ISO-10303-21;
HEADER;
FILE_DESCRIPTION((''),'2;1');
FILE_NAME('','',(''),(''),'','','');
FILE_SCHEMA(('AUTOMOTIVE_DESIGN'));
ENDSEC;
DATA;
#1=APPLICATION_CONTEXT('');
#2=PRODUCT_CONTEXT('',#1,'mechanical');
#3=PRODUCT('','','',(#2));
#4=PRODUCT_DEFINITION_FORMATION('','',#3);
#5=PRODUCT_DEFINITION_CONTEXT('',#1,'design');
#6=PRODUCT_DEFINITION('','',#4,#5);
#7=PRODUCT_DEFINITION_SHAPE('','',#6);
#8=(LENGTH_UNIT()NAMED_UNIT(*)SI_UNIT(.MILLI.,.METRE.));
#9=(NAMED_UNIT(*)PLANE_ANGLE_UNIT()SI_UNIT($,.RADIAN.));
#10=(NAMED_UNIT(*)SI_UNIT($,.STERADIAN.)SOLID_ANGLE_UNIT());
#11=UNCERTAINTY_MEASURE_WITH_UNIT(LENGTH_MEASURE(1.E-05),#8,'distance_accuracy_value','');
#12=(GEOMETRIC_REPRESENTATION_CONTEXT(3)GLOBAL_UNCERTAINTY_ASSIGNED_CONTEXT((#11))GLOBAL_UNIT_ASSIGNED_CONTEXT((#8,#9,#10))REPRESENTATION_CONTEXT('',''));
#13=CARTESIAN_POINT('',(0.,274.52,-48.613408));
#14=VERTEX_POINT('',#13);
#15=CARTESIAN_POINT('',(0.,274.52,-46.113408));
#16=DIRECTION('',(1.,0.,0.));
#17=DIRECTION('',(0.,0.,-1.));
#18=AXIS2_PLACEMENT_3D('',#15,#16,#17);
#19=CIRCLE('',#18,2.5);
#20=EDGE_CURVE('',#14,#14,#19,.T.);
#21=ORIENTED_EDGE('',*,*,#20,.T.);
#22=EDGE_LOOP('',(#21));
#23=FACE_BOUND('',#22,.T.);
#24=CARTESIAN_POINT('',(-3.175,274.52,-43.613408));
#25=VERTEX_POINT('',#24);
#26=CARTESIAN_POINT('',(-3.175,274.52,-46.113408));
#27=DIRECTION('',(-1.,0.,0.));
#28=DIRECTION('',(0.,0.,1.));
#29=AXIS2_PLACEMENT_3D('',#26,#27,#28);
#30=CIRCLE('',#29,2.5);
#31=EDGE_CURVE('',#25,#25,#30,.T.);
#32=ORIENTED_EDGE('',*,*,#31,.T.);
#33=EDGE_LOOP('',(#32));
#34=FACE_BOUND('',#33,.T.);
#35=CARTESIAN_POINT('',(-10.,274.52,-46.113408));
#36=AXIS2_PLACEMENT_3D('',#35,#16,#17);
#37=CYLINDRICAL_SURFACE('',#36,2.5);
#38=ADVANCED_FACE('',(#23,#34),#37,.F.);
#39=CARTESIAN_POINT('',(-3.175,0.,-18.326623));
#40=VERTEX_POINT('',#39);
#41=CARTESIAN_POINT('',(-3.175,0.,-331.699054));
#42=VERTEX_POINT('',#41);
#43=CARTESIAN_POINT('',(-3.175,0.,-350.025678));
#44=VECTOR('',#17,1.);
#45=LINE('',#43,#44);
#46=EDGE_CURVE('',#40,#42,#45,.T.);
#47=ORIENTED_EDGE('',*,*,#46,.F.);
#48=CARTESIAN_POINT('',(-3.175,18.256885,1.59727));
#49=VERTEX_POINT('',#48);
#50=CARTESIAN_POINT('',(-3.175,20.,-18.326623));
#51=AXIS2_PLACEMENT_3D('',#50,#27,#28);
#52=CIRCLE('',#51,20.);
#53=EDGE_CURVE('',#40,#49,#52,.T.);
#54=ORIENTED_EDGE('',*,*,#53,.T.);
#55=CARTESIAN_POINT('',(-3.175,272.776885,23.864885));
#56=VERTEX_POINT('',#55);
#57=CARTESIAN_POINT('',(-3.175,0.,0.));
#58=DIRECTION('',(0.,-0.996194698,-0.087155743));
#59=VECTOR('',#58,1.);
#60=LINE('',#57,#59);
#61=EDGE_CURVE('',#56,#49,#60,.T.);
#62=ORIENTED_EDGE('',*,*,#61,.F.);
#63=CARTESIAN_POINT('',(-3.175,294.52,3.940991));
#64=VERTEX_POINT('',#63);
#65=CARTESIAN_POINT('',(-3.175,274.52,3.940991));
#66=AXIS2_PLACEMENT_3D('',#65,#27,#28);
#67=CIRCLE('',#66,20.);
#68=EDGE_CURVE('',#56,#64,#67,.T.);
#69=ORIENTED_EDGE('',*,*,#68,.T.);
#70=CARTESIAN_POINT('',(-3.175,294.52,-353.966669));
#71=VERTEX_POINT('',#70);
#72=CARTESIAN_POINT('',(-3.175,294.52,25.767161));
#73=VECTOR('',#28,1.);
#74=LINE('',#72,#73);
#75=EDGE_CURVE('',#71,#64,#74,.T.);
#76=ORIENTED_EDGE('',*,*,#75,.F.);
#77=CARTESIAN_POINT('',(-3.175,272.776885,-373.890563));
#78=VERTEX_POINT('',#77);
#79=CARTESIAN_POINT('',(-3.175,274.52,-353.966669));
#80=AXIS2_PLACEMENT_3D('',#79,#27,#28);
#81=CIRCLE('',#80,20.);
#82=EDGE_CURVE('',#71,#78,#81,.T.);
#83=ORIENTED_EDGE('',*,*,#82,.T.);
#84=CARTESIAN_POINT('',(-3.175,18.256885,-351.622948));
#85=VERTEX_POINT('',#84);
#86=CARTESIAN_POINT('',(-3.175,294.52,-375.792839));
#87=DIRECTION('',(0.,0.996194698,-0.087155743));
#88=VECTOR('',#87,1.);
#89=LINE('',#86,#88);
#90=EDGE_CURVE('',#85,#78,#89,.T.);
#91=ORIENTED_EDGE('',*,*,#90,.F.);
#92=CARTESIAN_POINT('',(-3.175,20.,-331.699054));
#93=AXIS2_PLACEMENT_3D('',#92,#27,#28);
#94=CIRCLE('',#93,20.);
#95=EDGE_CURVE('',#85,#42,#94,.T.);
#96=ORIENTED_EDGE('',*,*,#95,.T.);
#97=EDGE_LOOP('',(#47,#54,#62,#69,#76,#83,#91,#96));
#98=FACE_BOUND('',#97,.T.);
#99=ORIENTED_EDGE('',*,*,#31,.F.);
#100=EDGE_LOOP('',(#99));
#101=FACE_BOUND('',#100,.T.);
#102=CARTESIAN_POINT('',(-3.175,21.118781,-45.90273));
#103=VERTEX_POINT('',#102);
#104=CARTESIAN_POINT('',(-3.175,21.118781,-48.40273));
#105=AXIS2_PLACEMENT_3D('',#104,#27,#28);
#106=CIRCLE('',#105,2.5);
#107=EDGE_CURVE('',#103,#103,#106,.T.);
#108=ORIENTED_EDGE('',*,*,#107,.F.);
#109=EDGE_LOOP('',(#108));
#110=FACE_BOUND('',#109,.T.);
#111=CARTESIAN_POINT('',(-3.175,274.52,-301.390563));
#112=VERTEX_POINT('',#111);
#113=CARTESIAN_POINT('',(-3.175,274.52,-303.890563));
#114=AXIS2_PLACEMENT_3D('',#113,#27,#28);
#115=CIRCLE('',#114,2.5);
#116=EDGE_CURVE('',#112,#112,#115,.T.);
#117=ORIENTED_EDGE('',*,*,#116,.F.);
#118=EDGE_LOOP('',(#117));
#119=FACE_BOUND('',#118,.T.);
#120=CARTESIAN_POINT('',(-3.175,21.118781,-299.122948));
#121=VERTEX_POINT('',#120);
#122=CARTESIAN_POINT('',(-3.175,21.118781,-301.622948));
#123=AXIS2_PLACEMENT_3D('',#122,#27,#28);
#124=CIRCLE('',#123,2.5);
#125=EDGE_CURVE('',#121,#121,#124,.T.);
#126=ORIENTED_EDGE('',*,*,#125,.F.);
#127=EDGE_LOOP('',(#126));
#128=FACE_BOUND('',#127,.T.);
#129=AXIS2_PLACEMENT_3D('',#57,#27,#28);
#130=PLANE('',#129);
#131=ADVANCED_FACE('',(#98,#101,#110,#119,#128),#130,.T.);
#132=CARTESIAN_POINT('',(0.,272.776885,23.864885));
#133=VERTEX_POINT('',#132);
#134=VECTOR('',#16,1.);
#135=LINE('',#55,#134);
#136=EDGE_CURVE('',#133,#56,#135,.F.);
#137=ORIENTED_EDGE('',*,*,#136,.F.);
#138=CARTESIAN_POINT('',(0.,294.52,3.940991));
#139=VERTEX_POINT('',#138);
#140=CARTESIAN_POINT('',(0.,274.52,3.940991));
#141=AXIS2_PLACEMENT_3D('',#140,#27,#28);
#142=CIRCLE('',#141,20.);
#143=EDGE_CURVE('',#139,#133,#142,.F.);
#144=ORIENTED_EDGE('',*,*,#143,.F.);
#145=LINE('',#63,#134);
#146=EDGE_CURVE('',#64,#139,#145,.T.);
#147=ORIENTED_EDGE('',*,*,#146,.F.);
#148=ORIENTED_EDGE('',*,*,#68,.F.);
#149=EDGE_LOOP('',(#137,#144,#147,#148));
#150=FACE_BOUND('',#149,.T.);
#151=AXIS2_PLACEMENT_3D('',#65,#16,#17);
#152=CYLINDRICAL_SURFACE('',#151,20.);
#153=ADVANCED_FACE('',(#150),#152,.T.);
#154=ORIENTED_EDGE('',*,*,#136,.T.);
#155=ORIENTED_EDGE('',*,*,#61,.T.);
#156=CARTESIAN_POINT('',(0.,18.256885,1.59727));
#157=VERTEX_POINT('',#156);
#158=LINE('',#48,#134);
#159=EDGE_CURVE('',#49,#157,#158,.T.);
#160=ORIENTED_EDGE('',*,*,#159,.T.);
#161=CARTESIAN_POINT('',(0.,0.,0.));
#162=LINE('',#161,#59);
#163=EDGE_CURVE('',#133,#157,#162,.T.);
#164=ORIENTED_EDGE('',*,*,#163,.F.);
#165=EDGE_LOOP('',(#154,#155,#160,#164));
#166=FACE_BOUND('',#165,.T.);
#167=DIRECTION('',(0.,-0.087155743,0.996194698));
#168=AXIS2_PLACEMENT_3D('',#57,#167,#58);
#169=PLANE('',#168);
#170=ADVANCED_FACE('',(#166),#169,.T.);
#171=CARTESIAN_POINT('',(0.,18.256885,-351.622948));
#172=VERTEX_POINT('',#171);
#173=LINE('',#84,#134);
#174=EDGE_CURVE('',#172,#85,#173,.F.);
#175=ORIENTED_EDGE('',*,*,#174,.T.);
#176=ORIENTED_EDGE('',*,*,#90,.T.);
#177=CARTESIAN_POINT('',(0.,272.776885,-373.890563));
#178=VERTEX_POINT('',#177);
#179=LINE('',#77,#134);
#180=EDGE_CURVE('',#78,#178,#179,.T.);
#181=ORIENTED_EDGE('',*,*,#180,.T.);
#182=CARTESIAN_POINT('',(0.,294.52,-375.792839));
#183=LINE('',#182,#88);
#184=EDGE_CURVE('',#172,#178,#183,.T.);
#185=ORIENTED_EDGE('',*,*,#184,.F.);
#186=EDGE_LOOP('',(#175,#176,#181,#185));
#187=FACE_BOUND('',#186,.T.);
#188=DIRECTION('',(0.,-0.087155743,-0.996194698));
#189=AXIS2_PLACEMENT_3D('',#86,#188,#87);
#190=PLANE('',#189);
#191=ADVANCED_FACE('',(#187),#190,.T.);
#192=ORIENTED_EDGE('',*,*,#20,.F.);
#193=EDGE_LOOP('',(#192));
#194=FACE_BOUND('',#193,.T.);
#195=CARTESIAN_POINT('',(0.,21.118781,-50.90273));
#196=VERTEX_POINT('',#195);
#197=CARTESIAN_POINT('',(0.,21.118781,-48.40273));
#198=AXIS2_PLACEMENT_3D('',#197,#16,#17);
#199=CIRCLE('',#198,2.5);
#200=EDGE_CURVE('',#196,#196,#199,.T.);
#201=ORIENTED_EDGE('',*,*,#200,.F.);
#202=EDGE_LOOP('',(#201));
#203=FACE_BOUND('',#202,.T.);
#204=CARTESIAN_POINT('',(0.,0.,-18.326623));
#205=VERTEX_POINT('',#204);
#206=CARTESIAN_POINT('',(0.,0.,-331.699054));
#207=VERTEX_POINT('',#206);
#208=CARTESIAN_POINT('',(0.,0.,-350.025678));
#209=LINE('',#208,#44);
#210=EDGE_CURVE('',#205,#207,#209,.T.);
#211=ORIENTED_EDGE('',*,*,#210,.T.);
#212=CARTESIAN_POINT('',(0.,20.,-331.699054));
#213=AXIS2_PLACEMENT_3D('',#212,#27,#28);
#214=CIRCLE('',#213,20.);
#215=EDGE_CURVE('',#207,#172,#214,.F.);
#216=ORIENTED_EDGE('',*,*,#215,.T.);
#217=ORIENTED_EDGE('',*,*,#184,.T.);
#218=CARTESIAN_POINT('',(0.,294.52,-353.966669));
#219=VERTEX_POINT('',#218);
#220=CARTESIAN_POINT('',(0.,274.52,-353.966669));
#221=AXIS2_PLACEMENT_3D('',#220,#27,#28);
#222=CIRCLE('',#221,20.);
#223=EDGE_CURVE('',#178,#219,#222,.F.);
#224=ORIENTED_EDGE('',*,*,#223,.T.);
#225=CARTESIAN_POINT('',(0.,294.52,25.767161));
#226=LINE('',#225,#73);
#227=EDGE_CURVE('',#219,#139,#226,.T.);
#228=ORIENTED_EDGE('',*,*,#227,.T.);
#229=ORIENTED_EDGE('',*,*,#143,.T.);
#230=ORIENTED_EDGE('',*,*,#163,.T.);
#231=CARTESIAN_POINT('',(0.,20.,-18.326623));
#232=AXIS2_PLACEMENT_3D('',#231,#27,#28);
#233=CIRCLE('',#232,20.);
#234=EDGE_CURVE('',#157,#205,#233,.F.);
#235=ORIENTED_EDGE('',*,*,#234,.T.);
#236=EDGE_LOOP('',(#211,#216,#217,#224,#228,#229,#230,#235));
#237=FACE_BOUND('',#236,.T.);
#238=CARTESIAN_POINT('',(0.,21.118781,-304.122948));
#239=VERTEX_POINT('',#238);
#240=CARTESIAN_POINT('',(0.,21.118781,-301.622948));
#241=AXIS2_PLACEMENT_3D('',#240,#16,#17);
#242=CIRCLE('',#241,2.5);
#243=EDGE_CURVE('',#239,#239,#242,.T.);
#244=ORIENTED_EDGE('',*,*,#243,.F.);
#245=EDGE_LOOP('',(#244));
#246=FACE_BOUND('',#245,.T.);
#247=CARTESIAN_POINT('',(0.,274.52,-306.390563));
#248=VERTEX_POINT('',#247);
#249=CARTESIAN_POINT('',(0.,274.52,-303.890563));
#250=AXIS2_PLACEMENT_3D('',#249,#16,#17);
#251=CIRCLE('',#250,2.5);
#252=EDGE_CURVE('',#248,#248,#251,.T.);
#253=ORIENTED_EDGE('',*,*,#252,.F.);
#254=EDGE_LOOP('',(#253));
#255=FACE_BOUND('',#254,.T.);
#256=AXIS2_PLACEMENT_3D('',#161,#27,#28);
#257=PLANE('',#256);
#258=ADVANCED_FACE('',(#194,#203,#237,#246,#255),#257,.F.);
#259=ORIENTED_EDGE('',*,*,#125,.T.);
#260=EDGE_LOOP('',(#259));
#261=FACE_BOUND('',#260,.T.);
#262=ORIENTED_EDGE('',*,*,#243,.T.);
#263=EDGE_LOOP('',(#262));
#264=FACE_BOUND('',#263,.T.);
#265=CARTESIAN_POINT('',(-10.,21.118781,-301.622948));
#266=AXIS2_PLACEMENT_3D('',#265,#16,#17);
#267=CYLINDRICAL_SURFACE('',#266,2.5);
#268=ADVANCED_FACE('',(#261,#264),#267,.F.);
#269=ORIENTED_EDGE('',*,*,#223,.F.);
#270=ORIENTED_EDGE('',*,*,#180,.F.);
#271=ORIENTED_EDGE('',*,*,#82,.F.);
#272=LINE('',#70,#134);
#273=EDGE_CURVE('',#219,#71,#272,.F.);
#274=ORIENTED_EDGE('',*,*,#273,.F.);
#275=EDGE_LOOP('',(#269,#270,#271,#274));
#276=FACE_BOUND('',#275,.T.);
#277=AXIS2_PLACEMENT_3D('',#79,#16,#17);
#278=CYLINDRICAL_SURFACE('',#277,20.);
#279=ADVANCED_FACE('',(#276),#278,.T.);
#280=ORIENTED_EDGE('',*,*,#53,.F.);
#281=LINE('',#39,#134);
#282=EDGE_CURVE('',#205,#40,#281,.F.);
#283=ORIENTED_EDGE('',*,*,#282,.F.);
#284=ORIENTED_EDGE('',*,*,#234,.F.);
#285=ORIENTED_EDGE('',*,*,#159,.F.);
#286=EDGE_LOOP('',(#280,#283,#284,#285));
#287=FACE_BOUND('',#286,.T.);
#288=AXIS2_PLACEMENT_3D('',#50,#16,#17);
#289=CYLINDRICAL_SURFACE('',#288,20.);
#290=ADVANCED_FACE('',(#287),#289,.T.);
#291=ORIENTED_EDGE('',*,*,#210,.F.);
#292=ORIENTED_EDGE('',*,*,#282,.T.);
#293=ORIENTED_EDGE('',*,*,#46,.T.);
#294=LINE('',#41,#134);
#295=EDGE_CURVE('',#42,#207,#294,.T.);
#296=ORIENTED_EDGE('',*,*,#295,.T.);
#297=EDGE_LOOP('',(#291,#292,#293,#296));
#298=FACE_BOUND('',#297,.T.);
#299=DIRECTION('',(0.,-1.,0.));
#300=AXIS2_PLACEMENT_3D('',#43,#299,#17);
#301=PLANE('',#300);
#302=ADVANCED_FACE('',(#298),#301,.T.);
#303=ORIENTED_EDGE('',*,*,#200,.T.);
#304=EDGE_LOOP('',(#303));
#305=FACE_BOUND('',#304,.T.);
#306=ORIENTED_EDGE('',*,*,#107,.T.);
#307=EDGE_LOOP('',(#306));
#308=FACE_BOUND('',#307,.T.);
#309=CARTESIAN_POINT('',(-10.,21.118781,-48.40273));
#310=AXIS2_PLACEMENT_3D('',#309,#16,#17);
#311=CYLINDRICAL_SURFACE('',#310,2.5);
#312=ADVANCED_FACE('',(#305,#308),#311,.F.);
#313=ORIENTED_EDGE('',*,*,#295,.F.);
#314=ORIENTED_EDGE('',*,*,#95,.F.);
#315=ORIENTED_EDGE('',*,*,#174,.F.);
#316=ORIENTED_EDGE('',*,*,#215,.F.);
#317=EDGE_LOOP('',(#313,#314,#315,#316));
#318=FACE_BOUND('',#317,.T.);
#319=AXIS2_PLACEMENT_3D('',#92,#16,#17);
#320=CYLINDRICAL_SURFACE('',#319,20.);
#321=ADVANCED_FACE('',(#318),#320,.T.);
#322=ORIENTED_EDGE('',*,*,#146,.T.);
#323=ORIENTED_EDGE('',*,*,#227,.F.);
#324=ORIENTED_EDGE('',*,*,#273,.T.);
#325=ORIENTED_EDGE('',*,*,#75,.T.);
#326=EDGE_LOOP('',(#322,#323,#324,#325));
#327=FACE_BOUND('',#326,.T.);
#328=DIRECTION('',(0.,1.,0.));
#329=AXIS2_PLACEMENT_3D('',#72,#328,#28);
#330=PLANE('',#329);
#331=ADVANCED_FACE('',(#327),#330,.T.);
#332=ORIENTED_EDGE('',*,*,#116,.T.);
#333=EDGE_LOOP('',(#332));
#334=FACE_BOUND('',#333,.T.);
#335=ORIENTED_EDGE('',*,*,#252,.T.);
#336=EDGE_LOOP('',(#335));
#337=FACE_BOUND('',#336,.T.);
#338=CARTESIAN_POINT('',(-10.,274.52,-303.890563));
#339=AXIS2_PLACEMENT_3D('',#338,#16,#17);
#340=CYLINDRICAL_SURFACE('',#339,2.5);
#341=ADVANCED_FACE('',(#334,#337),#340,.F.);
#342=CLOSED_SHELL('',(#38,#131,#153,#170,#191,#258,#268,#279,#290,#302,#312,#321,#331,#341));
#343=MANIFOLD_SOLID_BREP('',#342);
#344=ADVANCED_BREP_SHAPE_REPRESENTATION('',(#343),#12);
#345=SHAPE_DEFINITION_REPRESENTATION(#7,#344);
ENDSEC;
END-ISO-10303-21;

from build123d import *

# Parameters (mm, degrees)
BASE_FLANGE1_DEPTH = 3.175
FILLET1_R          = 20
SKETCH2_R          = 2.5
CUT_EXTRUDE1_DEPTH = 10


# Sheet-metal steps are written as plain solids
with BuildPart() as part:
    # Sketch1 → Base-Flange1 (new body)
    with BuildSketch(Plane(origin=(0, 0, 0), x_dir=(0, 0, -1), z_dir=(1, 0, 0))):
        Polygon((0, 0), (-25.767161182, 294.52), (375.792838818, 294.52), (350.025677637, 0), align=None)
    extrude(amount=-BASE_FLANGE1_DEPTH)

    # Fillet1
    fillet1_edges = [part.edges().sort_by_distance(p)[0] for p in [
        (-1.5875, 0, 0),
        (-1.5875, 294.52, 25.767161182),
        (-1.5875, 294.52, -375.792838818),
        (-1.5875, 0, -350.025677637),
    ]]
    fillet(fillet1_edges, radius=FILLET1_R)

    # Sketch2 → Cut-Extrude1 (cut)
    with BuildSketch(Plane(origin=(0, 0, 0), x_dir=(0, 0, -1), z_dir=(1, 0, 0))):
        with Locations((46.113408302, 274.52)):
            Circle(SKETCH2_R)
        with Locations((303.890562759, 274.52)):
            Circle(SKETCH2_R)
        with Locations((48.402729519, 21.11878104)):
            Circle(SKETCH2_R)
        with Locations((301.622948118, 21.11878104)):
            Circle(SKETCH2_R)
    extrude(amount=-CUT_EXTRUDE1_DEPTH, mode=Mode.SUBTRACT)


solid = part.part
